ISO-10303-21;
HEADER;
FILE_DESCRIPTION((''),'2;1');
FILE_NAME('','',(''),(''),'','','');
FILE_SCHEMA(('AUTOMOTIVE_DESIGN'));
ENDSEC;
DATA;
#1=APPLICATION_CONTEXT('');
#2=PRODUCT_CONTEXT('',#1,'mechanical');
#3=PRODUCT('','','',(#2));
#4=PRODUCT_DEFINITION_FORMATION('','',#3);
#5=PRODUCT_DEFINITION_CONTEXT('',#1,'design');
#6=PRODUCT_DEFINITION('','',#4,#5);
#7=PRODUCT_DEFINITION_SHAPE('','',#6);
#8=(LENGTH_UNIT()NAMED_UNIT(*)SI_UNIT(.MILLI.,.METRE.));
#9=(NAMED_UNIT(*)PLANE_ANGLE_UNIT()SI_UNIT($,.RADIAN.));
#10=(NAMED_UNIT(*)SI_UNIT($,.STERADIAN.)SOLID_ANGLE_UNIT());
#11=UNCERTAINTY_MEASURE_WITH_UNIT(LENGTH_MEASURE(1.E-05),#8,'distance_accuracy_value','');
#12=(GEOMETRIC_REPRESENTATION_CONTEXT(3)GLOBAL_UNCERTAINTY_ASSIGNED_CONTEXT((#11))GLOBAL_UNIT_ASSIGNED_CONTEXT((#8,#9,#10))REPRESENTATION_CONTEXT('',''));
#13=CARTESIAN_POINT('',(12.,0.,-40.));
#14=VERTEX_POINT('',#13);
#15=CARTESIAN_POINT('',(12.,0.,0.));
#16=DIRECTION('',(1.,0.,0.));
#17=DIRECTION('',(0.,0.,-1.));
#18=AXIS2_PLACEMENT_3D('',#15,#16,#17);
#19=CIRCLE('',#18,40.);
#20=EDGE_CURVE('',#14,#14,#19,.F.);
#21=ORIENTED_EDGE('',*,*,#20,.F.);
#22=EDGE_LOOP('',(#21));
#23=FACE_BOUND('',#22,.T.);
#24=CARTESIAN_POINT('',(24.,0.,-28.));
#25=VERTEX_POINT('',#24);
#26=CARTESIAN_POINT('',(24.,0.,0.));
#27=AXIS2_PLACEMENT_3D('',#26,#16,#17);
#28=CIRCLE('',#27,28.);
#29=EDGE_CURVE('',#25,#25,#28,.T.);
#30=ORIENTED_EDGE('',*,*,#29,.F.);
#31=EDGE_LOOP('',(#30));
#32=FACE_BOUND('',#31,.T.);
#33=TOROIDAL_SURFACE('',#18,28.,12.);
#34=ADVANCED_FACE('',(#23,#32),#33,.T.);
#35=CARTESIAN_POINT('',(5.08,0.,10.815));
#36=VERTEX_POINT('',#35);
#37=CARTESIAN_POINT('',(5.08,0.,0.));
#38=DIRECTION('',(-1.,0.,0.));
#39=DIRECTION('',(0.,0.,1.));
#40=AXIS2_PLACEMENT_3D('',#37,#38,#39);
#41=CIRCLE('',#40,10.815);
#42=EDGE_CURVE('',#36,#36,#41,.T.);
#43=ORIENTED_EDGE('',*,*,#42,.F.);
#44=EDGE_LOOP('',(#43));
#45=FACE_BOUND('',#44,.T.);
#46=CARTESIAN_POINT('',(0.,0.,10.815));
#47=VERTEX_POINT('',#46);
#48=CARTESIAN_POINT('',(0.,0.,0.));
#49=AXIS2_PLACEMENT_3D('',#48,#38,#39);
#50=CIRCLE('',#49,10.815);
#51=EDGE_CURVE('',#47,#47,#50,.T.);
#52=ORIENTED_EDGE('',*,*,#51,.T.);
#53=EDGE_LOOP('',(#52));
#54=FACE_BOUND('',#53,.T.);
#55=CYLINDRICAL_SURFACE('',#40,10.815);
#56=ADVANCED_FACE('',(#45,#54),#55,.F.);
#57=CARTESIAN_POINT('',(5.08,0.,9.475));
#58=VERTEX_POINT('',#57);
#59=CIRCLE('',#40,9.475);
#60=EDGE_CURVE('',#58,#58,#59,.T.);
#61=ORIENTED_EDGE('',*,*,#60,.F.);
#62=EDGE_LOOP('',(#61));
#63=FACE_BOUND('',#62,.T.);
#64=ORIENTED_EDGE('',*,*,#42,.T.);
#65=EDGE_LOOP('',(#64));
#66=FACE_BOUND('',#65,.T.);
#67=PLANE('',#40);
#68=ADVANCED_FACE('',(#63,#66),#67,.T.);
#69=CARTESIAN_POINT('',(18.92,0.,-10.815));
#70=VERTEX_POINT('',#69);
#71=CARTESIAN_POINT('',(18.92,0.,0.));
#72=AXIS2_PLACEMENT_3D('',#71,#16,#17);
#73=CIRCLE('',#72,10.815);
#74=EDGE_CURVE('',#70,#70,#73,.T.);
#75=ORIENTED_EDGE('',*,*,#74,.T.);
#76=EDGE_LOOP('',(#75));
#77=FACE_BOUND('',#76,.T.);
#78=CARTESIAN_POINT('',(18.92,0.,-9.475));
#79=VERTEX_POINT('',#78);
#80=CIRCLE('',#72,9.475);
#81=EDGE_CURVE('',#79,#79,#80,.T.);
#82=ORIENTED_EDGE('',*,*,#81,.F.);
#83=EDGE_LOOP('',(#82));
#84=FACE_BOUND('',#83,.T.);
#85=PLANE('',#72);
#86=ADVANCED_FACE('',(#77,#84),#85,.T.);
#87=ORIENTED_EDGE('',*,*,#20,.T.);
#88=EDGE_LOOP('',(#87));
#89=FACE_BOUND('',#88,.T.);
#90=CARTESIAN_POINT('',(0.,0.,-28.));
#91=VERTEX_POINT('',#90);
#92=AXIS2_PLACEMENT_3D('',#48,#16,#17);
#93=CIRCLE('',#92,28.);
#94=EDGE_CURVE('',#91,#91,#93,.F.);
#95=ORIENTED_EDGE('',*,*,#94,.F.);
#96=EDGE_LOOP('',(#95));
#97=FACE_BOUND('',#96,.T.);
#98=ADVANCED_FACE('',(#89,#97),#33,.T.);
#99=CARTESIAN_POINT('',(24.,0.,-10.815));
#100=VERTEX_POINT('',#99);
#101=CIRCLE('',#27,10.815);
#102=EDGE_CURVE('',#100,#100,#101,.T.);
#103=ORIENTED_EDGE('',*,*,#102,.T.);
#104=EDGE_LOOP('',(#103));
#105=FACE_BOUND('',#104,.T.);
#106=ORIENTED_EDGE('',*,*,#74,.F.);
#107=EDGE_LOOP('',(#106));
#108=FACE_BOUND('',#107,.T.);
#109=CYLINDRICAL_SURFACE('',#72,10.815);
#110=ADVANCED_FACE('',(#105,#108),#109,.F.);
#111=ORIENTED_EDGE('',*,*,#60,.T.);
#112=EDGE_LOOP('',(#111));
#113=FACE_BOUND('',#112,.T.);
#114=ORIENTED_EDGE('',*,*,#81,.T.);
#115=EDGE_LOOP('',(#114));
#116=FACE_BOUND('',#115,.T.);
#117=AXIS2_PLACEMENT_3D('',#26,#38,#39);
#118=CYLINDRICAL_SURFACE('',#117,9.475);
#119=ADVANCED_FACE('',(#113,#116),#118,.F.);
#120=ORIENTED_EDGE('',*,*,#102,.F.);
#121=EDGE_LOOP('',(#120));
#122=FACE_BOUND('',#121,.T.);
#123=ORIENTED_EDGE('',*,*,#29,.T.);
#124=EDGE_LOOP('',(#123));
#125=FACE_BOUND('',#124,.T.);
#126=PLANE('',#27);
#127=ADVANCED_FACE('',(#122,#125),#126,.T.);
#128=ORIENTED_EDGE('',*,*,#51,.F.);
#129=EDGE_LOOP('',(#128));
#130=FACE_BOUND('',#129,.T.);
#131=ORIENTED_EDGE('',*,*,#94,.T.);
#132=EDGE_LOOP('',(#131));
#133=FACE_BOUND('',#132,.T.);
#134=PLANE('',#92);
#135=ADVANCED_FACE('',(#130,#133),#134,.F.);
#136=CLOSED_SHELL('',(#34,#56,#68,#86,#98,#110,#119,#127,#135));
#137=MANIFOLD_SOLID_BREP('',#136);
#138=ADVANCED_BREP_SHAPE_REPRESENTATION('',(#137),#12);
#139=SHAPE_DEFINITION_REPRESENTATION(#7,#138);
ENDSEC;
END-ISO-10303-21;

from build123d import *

# Parameters (mm, degrees)
SKETCH1_R           = 40
SKETCH1_R_2         = 9.475
BOSS_EXTRUDE1_DEPTH = 24
FILLET1_R           = 12
SKETCH2_R           = 10.815
CUT_EXTRUDE1_DEPTH  = 5.08
CUT_EXTRUDE2_START  = -5.08
SKETCH3_R           = 10.815
CUT_EXTRUDE2_DEPTH  = 5.08


with BuildPart() as part:
    # Sketch1 → Boss-Extrude1 (new body)
    with BuildSketch(Plane(origin=(0, 0, 0), x_dir=(0, 0, -1), z_dir=(1, 0, 0))):
        Circle(SKETCH1_R)
        Circle(SKETCH1_R_2, mode=Mode.SUBTRACT)
    extrude(amount=BOSS_EXTRUDE1_DEPTH)

    # Fillet1
    fillet1_edges = [part.edges().sort_by_distance(p)[0] for p in [
        (0, 0, 40),
        (24, 0, 40),
    ]]
    fillet(fillet1_edges, radius=FILLET1_R - 0.0001)  # a hair under: the kernel refuses the full size

    # Sketch2 → Cut-Extrude1 (cut)
    with BuildSketch(Plane(origin=(24, 0, 0), x_dir=(0, 0, -1), z_dir=(1, 0, 0))):
        Circle(SKETCH2_R)
    extrude(amount=-CUT_EXTRUDE1_DEPTH, mode=Mode.SUBTRACT)

    # Sketch3 → Cut-Extrude2 (cut)
    with BuildSketch(Plane.ZY.offset(CUT_EXTRUDE2_START)):
        with Locations(Location((0, 0, 0), (0, 0, 180))):
            Circle(SKETCH3_R)
    extrude(amount=CUT_EXTRUDE2_DEPTH, mode=Mode.SUBTRACT)


solid = part.part
